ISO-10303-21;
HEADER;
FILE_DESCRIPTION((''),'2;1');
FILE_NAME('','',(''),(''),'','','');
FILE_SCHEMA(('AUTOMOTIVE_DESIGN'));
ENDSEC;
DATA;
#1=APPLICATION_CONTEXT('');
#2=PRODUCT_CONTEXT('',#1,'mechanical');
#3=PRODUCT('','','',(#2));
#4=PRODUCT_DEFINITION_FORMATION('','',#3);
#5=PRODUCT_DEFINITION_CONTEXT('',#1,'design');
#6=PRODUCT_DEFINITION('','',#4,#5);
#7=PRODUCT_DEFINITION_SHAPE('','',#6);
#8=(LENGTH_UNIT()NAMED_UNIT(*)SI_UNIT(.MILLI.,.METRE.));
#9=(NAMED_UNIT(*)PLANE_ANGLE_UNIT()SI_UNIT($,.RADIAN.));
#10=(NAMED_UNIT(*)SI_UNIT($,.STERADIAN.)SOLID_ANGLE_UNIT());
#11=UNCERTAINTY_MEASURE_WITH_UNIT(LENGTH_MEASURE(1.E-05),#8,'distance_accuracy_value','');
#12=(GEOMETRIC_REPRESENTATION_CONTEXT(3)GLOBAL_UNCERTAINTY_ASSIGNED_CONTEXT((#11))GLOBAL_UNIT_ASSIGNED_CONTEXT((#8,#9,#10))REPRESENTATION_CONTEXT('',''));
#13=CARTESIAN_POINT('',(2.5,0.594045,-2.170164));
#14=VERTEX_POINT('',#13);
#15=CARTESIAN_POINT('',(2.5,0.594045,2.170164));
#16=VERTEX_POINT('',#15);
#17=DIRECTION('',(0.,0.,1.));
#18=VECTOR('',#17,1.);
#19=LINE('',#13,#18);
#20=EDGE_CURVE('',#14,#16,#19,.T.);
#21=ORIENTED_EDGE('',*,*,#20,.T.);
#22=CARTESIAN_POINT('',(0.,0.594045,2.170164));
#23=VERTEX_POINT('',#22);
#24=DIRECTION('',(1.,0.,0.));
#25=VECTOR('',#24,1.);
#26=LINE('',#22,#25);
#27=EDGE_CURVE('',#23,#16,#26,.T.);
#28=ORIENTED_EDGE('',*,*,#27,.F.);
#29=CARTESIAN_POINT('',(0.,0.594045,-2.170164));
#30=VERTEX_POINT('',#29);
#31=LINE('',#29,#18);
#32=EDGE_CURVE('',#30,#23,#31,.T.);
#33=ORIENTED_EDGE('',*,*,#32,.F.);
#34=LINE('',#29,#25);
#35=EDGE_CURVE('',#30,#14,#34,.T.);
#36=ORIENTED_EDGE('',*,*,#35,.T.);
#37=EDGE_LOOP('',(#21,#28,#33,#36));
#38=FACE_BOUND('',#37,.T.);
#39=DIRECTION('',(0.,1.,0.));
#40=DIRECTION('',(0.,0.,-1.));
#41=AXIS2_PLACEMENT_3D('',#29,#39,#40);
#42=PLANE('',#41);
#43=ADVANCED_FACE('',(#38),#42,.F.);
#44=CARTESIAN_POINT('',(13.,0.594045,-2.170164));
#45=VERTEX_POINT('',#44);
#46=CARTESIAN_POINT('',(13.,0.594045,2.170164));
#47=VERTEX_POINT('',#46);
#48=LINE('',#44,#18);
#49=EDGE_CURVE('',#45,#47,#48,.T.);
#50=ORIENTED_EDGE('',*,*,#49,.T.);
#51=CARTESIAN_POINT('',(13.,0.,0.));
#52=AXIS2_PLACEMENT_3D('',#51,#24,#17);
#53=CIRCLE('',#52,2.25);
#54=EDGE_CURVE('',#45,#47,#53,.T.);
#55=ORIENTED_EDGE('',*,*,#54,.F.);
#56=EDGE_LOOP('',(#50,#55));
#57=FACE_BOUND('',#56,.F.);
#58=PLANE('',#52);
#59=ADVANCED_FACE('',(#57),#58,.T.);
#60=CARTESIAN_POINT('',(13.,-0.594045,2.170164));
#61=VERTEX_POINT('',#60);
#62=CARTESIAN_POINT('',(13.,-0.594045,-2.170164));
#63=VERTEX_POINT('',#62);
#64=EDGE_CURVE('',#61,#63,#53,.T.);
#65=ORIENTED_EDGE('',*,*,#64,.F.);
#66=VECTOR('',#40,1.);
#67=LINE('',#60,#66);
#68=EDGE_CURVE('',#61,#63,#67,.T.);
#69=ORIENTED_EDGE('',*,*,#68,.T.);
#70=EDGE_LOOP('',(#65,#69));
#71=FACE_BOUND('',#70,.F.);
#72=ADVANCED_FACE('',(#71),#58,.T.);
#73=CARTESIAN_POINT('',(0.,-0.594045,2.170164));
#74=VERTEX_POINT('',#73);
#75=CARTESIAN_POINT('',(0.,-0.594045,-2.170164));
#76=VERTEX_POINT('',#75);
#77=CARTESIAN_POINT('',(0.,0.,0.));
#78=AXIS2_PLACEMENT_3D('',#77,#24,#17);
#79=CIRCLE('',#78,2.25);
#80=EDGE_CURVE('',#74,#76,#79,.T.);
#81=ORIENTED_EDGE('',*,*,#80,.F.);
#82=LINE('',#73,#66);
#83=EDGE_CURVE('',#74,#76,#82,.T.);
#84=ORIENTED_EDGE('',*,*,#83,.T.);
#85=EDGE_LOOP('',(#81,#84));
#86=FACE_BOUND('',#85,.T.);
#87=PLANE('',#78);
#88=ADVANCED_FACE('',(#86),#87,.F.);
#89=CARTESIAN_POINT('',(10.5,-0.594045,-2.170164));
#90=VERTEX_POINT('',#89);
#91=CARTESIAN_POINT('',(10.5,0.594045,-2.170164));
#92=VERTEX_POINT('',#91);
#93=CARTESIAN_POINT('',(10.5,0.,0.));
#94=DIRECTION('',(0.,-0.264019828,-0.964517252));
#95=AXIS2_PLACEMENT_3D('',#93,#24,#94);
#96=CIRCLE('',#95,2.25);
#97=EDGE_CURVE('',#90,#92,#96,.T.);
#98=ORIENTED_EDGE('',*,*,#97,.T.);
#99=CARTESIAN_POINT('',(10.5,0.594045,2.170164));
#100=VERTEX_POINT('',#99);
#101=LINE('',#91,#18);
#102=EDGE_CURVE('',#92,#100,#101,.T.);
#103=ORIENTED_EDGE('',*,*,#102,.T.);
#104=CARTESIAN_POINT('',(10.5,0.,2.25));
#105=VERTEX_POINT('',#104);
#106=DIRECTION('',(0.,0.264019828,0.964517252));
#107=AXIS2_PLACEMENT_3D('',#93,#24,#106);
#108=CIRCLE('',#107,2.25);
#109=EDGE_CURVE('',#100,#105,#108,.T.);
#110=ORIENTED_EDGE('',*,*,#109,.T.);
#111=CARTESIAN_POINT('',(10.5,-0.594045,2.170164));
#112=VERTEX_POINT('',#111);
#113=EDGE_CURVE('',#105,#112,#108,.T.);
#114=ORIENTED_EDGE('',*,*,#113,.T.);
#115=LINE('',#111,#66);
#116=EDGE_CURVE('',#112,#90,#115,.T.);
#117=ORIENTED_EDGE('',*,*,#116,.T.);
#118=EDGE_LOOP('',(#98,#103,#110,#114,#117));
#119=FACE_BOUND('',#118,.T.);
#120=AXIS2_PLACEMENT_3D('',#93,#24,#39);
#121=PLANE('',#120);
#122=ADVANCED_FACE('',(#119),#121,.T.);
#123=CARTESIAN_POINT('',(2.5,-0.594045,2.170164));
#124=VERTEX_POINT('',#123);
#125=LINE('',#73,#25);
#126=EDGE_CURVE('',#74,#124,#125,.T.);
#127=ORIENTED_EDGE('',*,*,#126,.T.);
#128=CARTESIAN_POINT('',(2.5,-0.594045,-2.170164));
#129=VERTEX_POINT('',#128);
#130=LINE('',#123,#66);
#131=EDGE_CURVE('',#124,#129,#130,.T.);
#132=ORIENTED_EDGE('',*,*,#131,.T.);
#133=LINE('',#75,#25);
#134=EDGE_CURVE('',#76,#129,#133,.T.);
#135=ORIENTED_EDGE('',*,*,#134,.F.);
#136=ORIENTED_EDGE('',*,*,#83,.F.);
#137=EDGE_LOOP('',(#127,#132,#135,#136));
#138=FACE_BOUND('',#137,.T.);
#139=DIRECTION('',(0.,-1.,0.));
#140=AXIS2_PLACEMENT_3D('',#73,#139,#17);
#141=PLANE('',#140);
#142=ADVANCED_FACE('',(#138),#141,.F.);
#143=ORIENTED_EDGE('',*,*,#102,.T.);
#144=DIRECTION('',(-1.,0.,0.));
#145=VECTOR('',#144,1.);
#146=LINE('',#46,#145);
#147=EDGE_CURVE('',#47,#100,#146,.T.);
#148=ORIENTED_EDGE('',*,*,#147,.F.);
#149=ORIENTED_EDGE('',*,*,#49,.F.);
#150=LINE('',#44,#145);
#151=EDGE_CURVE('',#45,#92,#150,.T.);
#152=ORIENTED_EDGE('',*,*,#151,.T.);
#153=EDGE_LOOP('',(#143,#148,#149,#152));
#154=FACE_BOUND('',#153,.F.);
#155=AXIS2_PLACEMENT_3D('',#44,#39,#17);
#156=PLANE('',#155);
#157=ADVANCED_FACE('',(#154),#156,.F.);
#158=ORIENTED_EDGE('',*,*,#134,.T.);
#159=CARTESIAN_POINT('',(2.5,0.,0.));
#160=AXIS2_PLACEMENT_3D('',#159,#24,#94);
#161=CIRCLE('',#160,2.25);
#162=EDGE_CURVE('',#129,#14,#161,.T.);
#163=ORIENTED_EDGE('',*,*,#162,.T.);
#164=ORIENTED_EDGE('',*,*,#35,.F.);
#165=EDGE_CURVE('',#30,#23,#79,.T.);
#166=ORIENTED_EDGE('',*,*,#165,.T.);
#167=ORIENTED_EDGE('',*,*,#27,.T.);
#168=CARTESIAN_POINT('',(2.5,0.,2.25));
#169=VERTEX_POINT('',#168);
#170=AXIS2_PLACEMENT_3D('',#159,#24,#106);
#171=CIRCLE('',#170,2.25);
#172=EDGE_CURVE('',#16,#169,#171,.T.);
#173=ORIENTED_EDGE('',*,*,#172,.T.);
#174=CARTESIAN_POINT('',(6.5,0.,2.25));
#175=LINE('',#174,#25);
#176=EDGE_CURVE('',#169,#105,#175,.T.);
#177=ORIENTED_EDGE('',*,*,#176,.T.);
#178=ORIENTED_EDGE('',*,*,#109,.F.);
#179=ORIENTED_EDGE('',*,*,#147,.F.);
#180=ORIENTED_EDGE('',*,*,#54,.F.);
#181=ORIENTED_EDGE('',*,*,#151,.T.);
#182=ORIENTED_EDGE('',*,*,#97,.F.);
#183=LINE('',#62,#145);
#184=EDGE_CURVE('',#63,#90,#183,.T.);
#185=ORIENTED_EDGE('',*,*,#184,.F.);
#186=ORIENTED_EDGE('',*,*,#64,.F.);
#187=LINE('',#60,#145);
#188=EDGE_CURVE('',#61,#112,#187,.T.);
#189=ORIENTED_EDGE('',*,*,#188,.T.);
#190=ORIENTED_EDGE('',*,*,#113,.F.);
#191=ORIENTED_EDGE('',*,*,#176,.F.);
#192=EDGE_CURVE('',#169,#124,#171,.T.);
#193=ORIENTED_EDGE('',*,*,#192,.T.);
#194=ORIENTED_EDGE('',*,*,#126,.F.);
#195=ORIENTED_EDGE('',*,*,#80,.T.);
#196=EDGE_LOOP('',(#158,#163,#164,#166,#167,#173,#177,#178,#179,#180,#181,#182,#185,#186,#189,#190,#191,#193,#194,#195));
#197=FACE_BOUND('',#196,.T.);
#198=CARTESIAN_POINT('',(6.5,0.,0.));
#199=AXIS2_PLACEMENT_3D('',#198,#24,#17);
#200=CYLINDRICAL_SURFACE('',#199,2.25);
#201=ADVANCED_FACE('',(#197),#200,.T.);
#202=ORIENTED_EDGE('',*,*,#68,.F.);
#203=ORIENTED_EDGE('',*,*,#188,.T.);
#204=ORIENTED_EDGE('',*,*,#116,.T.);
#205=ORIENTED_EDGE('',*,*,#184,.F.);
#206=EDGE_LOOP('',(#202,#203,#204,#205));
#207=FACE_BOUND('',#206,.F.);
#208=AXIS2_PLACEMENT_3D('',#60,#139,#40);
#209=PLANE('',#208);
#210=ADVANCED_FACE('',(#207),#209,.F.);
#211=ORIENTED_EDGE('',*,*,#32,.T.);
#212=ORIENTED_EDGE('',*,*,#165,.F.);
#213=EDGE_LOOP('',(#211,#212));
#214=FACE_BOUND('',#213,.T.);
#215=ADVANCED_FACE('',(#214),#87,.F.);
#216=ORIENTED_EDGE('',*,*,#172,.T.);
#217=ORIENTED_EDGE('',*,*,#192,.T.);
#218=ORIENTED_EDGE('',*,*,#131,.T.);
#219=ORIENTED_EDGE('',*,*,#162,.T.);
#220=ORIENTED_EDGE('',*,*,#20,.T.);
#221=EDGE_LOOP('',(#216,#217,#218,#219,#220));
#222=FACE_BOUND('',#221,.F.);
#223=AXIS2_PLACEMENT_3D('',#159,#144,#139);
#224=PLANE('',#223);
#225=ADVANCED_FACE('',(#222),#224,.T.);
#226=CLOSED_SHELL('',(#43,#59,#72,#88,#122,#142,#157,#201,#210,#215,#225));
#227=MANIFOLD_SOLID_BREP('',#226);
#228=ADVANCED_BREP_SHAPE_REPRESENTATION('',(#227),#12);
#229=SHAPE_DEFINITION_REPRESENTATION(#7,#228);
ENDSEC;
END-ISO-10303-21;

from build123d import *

# Parameters (mm, degrees)
F0_W     = 13
F0_H     = 2.25
F3_DEPTH = 2.5


# Not quite as in the source:
# - a pattern or mirror of a feature is missing from the dataset's text; its kind, count and spacing are read off the source's solid


with BuildPart() as f1:
    # F0 (on Front) → F1 (revolve)
    with BuildSketch(Plane.XZ):
        with Locations((6.5, 1.125)):
            Rectangle(F0_W, F0_H)
    revolve(axis=Axis((6.5, 0, 0), (1, 0, 0)))

    # F2 (on face) → F3 (cut)
    with BuildSketch(Plane.YZ.offset(13)):
        with BuildLine():
            Line((0.5940446135, -2.170163818), (0.5940446135, 2.170163818))
            ThreePointArc((0.5940446135, 2.170163818), (0, 2.25), (-0.5940446135, 2.170163818))
            Line((-0.5940446135, 2.170163818), (-0.5940446135, -2.170163818))
            ThreePointArc((-0.5940446135, -2.170163818), (0, -2.25), (0.5940446135, -2.170163818))
        make_face()
    f3 = extrude(amount=-F3_DEPTH, mode=Mode.SUBTRACT)

    # F3_copies: F3 across plane
    add(f3.mirror(Plane(origin=(6.5, 0, 0), x_dir=(0, 0, -1), z_dir=(-1, 0, 0))), mode=Mode.SUBTRACT)


solid = f1.part
